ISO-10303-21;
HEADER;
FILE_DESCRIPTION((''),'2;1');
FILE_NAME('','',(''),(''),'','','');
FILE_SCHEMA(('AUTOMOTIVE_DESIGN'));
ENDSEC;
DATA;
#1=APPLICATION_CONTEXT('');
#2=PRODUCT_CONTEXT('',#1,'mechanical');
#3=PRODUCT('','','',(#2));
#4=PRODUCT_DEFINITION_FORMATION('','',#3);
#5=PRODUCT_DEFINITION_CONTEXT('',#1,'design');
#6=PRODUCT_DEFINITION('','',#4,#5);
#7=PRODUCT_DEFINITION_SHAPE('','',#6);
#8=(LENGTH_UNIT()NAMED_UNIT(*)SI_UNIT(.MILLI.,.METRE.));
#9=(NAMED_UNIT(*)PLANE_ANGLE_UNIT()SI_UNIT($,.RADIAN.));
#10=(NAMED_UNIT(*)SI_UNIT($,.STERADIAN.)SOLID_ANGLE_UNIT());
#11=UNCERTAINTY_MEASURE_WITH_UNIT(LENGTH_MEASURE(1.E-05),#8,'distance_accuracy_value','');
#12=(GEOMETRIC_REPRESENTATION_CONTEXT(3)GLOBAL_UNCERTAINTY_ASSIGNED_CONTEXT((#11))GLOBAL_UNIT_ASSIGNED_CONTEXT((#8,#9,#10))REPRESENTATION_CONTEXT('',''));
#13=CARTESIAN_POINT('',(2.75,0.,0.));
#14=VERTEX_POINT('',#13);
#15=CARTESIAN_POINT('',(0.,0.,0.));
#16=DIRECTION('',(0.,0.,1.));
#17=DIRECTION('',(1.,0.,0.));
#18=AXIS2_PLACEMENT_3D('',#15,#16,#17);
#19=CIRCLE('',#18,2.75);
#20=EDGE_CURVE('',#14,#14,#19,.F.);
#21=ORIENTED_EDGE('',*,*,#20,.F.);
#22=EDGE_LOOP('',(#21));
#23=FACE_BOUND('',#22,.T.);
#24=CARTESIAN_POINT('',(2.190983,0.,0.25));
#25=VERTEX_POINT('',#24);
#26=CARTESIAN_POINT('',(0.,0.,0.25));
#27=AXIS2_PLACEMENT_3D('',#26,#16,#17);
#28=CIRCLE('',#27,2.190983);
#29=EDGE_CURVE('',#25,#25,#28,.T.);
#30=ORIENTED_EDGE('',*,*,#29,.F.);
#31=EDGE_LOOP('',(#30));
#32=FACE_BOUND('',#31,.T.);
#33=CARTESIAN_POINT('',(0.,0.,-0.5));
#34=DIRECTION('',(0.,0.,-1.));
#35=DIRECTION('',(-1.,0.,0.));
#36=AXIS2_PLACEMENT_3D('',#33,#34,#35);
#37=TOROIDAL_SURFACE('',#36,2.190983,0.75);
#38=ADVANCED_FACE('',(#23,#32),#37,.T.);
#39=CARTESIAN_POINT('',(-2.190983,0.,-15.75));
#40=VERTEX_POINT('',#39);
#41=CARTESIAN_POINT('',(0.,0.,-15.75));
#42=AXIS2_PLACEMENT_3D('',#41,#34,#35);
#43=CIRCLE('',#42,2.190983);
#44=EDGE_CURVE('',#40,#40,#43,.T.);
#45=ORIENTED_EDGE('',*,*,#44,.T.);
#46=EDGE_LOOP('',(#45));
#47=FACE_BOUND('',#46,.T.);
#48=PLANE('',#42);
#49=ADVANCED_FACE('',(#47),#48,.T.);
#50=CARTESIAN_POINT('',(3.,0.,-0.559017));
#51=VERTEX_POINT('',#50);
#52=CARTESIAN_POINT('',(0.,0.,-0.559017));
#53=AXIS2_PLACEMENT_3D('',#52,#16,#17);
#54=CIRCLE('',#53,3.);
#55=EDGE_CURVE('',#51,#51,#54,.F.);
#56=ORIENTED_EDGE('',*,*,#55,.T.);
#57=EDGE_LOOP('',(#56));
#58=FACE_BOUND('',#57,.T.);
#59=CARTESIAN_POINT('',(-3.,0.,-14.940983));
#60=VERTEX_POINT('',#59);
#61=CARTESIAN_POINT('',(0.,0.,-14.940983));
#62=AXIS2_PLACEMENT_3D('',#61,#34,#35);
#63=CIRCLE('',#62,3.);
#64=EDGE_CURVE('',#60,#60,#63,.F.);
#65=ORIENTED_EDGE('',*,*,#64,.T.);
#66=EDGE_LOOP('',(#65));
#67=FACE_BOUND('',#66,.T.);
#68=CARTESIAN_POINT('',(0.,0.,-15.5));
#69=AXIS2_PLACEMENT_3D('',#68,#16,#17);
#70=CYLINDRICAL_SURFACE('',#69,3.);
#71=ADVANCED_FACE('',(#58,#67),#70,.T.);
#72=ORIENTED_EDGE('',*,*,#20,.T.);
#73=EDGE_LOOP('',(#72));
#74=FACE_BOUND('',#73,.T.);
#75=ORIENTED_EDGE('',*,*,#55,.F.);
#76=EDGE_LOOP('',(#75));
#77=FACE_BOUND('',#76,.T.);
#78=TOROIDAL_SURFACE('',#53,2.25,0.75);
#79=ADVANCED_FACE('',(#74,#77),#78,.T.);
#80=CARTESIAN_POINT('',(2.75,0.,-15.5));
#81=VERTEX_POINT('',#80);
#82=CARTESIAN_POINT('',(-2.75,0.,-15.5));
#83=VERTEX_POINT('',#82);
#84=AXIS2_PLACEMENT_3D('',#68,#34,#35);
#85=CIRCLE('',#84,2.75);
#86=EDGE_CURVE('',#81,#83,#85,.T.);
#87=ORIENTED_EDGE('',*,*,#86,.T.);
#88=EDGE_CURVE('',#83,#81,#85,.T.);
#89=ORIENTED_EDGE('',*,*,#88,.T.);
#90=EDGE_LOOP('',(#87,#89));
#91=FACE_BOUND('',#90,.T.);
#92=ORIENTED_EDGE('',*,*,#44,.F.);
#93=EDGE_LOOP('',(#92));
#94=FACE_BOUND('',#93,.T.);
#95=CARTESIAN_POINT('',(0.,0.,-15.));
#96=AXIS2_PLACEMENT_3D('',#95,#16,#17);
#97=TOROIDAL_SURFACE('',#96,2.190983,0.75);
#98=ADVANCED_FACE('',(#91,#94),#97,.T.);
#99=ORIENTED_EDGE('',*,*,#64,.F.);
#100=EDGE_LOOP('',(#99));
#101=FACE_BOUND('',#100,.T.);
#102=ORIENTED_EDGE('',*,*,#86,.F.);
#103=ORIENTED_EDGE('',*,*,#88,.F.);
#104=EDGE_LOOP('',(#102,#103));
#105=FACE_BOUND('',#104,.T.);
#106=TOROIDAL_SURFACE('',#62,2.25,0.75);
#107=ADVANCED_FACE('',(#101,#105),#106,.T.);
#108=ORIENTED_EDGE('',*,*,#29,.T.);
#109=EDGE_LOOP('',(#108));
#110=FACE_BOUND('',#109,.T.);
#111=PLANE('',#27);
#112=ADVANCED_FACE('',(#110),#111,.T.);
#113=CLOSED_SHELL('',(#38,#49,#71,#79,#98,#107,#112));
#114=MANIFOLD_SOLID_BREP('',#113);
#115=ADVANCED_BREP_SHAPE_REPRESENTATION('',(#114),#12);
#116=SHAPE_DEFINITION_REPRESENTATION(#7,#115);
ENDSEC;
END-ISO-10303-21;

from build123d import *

# Parameters (mm, degrees)
SKETCH2_R           = 3
BOSS_EXTRUDE1_DEPTH = 15.5
SKETCH5_R           = 2.75
BOSS_EXTRUDE2_DEPTH = 0.25
FILLET3_R           = 0.75
SKETCH6_R           = 2.75
BOSS_EXTRUDE3_DEPTH = 0.25
FILLET4_R           = 0.75


with BuildPart() as part:
    # Sketch2 → Boss-Extrude1 (new body)
    with BuildSketch(Plane.XY):
        Circle(SKETCH2_R)
    extrude(amount=-BOSS_EXTRUDE1_DEPTH)

    # Sketch5 → Boss-Extrude2 (add)
    with BuildSketch(Plane.XY):
        Circle(SKETCH5_R)
    extrude(amount=BOSS_EXTRUDE2_DEPTH)

    # Fillet3
    # the kernel refuses this fillet: 0.75 mm, written as the material it takes off along each edge
    with BuildSketch(Plane(origin=(0, 0, 0), x_dir=(1, 0, 0), z_dir=(0, -1, 0))) as fillet3_piece_1:
        with BuildLine():
            CenterArc((2.25, -0.559016994), FILLET3_R, 0, 48.189685104)
            Line((2.75, 0), (2.76, 0.01118034))
            ThreePointArc((2.76, 0.01118034), (2.875, 0.015), (3, 0.015))
            Line((3, 0.015), (3.015, 0))
            Line((3.015, 0), (3.015, -0.559016994))
            Line((3.015, -0.559016994), (3, -0.559016994))
        make_face()
    revolve(axis=Axis((0, 0, 0), (0, 0, 1)), mode=Mode.SUBTRACT)
    with BuildSketch(Plane(origin=(0, 0, 0.25), x_dir=(1, 0, 0), z_dir=(0, -1, 0))) as fillet3_piece_2:
        with BuildLine():
            CenterArc((2.190983006, -0.75), FILLET3_R, 41.810314896, 48.189685104)
            Line((2.190983006, 0), (2.190983006, 0.015))
            Line((2.190983006, 0.015), (2.75, 0.015))
            Line((2.75, 0.015), (2.765, 0))
            ThreePointArc((2.765, 0), (2.765, -0.125), (2.76118034, -0.24))
            Line((2.76118034, -0.24), (2.75, -0.25))
        make_face()
    revolve(axis=Axis((0, 0, 0.25), (0, 0, 1)), mode=Mode.SUBTRACT)

    # Sketch6 → Boss-Extrude3 (add)
    with BuildSketch(Plane(origin=(0, 0, -15.5), x_dir=(-1, 0, 0), z_dir=(0, 0, -1))):
        Circle(SKETCH6_R)
    extrude(amount=BOSS_EXTRUDE3_DEPTH)

    # Fillet4
    # the kernel refuses this fillet: 0.75 mm, written as the material it takes off along each edge
    with BuildSketch(Plane(origin=(0, 0, -15.75), x_dir=(-1, 0, 0), z_dir=(0, -1, 0))) as fillet4_piece_1:
        with BuildLine():
            CenterArc((2.190983006, -0.75), FILLET4_R, 41.810314896, 48.189685104)
            Line((2.190983006, 0), (2.190983006, 0.015))
            Line((2.190983006, 0.015), (2.75, 0.015))
            Line((2.75, 0.015), (2.765, 0))
            ThreePointArc((2.765, 0), (2.765, -0.125), (2.76118034, -0.24))
            Line((2.76118034, -0.24), (2.75, -0.25))
        make_face()
    revolve(axis=Axis((0, 0, -15.75), (0, 0, -1)), mode=Mode.SUBTRACT)
    with BuildSketch(Plane(origin=(0, 0, -15.5), x_dir=(1, 0, 0), z_dir=(0, -1, 0))) as fillet4_piece_2:
        with BuildLine():
            CenterArc((2.25, 0.559016994), FILLET4_R, 311.810314896, 48.189685104)
            Line((2.75, 0), (2.76, -0.01118034))
            ThreePointArc((2.76, -0.01118034), (2.875, -0.015), (3, -0.015))
            Line((3, -0.015), (3.015, 0))
            Line((3.015, 0), (3.015, 0.559016994))
            Line((3.015, 0.559016994), (3, 0.559016994))
        make_face()
    revolve(axis=Axis((0, 0, -15.5), (0, 0, 1)), mode=Mode.SUBTRACT)


solid = part.part
